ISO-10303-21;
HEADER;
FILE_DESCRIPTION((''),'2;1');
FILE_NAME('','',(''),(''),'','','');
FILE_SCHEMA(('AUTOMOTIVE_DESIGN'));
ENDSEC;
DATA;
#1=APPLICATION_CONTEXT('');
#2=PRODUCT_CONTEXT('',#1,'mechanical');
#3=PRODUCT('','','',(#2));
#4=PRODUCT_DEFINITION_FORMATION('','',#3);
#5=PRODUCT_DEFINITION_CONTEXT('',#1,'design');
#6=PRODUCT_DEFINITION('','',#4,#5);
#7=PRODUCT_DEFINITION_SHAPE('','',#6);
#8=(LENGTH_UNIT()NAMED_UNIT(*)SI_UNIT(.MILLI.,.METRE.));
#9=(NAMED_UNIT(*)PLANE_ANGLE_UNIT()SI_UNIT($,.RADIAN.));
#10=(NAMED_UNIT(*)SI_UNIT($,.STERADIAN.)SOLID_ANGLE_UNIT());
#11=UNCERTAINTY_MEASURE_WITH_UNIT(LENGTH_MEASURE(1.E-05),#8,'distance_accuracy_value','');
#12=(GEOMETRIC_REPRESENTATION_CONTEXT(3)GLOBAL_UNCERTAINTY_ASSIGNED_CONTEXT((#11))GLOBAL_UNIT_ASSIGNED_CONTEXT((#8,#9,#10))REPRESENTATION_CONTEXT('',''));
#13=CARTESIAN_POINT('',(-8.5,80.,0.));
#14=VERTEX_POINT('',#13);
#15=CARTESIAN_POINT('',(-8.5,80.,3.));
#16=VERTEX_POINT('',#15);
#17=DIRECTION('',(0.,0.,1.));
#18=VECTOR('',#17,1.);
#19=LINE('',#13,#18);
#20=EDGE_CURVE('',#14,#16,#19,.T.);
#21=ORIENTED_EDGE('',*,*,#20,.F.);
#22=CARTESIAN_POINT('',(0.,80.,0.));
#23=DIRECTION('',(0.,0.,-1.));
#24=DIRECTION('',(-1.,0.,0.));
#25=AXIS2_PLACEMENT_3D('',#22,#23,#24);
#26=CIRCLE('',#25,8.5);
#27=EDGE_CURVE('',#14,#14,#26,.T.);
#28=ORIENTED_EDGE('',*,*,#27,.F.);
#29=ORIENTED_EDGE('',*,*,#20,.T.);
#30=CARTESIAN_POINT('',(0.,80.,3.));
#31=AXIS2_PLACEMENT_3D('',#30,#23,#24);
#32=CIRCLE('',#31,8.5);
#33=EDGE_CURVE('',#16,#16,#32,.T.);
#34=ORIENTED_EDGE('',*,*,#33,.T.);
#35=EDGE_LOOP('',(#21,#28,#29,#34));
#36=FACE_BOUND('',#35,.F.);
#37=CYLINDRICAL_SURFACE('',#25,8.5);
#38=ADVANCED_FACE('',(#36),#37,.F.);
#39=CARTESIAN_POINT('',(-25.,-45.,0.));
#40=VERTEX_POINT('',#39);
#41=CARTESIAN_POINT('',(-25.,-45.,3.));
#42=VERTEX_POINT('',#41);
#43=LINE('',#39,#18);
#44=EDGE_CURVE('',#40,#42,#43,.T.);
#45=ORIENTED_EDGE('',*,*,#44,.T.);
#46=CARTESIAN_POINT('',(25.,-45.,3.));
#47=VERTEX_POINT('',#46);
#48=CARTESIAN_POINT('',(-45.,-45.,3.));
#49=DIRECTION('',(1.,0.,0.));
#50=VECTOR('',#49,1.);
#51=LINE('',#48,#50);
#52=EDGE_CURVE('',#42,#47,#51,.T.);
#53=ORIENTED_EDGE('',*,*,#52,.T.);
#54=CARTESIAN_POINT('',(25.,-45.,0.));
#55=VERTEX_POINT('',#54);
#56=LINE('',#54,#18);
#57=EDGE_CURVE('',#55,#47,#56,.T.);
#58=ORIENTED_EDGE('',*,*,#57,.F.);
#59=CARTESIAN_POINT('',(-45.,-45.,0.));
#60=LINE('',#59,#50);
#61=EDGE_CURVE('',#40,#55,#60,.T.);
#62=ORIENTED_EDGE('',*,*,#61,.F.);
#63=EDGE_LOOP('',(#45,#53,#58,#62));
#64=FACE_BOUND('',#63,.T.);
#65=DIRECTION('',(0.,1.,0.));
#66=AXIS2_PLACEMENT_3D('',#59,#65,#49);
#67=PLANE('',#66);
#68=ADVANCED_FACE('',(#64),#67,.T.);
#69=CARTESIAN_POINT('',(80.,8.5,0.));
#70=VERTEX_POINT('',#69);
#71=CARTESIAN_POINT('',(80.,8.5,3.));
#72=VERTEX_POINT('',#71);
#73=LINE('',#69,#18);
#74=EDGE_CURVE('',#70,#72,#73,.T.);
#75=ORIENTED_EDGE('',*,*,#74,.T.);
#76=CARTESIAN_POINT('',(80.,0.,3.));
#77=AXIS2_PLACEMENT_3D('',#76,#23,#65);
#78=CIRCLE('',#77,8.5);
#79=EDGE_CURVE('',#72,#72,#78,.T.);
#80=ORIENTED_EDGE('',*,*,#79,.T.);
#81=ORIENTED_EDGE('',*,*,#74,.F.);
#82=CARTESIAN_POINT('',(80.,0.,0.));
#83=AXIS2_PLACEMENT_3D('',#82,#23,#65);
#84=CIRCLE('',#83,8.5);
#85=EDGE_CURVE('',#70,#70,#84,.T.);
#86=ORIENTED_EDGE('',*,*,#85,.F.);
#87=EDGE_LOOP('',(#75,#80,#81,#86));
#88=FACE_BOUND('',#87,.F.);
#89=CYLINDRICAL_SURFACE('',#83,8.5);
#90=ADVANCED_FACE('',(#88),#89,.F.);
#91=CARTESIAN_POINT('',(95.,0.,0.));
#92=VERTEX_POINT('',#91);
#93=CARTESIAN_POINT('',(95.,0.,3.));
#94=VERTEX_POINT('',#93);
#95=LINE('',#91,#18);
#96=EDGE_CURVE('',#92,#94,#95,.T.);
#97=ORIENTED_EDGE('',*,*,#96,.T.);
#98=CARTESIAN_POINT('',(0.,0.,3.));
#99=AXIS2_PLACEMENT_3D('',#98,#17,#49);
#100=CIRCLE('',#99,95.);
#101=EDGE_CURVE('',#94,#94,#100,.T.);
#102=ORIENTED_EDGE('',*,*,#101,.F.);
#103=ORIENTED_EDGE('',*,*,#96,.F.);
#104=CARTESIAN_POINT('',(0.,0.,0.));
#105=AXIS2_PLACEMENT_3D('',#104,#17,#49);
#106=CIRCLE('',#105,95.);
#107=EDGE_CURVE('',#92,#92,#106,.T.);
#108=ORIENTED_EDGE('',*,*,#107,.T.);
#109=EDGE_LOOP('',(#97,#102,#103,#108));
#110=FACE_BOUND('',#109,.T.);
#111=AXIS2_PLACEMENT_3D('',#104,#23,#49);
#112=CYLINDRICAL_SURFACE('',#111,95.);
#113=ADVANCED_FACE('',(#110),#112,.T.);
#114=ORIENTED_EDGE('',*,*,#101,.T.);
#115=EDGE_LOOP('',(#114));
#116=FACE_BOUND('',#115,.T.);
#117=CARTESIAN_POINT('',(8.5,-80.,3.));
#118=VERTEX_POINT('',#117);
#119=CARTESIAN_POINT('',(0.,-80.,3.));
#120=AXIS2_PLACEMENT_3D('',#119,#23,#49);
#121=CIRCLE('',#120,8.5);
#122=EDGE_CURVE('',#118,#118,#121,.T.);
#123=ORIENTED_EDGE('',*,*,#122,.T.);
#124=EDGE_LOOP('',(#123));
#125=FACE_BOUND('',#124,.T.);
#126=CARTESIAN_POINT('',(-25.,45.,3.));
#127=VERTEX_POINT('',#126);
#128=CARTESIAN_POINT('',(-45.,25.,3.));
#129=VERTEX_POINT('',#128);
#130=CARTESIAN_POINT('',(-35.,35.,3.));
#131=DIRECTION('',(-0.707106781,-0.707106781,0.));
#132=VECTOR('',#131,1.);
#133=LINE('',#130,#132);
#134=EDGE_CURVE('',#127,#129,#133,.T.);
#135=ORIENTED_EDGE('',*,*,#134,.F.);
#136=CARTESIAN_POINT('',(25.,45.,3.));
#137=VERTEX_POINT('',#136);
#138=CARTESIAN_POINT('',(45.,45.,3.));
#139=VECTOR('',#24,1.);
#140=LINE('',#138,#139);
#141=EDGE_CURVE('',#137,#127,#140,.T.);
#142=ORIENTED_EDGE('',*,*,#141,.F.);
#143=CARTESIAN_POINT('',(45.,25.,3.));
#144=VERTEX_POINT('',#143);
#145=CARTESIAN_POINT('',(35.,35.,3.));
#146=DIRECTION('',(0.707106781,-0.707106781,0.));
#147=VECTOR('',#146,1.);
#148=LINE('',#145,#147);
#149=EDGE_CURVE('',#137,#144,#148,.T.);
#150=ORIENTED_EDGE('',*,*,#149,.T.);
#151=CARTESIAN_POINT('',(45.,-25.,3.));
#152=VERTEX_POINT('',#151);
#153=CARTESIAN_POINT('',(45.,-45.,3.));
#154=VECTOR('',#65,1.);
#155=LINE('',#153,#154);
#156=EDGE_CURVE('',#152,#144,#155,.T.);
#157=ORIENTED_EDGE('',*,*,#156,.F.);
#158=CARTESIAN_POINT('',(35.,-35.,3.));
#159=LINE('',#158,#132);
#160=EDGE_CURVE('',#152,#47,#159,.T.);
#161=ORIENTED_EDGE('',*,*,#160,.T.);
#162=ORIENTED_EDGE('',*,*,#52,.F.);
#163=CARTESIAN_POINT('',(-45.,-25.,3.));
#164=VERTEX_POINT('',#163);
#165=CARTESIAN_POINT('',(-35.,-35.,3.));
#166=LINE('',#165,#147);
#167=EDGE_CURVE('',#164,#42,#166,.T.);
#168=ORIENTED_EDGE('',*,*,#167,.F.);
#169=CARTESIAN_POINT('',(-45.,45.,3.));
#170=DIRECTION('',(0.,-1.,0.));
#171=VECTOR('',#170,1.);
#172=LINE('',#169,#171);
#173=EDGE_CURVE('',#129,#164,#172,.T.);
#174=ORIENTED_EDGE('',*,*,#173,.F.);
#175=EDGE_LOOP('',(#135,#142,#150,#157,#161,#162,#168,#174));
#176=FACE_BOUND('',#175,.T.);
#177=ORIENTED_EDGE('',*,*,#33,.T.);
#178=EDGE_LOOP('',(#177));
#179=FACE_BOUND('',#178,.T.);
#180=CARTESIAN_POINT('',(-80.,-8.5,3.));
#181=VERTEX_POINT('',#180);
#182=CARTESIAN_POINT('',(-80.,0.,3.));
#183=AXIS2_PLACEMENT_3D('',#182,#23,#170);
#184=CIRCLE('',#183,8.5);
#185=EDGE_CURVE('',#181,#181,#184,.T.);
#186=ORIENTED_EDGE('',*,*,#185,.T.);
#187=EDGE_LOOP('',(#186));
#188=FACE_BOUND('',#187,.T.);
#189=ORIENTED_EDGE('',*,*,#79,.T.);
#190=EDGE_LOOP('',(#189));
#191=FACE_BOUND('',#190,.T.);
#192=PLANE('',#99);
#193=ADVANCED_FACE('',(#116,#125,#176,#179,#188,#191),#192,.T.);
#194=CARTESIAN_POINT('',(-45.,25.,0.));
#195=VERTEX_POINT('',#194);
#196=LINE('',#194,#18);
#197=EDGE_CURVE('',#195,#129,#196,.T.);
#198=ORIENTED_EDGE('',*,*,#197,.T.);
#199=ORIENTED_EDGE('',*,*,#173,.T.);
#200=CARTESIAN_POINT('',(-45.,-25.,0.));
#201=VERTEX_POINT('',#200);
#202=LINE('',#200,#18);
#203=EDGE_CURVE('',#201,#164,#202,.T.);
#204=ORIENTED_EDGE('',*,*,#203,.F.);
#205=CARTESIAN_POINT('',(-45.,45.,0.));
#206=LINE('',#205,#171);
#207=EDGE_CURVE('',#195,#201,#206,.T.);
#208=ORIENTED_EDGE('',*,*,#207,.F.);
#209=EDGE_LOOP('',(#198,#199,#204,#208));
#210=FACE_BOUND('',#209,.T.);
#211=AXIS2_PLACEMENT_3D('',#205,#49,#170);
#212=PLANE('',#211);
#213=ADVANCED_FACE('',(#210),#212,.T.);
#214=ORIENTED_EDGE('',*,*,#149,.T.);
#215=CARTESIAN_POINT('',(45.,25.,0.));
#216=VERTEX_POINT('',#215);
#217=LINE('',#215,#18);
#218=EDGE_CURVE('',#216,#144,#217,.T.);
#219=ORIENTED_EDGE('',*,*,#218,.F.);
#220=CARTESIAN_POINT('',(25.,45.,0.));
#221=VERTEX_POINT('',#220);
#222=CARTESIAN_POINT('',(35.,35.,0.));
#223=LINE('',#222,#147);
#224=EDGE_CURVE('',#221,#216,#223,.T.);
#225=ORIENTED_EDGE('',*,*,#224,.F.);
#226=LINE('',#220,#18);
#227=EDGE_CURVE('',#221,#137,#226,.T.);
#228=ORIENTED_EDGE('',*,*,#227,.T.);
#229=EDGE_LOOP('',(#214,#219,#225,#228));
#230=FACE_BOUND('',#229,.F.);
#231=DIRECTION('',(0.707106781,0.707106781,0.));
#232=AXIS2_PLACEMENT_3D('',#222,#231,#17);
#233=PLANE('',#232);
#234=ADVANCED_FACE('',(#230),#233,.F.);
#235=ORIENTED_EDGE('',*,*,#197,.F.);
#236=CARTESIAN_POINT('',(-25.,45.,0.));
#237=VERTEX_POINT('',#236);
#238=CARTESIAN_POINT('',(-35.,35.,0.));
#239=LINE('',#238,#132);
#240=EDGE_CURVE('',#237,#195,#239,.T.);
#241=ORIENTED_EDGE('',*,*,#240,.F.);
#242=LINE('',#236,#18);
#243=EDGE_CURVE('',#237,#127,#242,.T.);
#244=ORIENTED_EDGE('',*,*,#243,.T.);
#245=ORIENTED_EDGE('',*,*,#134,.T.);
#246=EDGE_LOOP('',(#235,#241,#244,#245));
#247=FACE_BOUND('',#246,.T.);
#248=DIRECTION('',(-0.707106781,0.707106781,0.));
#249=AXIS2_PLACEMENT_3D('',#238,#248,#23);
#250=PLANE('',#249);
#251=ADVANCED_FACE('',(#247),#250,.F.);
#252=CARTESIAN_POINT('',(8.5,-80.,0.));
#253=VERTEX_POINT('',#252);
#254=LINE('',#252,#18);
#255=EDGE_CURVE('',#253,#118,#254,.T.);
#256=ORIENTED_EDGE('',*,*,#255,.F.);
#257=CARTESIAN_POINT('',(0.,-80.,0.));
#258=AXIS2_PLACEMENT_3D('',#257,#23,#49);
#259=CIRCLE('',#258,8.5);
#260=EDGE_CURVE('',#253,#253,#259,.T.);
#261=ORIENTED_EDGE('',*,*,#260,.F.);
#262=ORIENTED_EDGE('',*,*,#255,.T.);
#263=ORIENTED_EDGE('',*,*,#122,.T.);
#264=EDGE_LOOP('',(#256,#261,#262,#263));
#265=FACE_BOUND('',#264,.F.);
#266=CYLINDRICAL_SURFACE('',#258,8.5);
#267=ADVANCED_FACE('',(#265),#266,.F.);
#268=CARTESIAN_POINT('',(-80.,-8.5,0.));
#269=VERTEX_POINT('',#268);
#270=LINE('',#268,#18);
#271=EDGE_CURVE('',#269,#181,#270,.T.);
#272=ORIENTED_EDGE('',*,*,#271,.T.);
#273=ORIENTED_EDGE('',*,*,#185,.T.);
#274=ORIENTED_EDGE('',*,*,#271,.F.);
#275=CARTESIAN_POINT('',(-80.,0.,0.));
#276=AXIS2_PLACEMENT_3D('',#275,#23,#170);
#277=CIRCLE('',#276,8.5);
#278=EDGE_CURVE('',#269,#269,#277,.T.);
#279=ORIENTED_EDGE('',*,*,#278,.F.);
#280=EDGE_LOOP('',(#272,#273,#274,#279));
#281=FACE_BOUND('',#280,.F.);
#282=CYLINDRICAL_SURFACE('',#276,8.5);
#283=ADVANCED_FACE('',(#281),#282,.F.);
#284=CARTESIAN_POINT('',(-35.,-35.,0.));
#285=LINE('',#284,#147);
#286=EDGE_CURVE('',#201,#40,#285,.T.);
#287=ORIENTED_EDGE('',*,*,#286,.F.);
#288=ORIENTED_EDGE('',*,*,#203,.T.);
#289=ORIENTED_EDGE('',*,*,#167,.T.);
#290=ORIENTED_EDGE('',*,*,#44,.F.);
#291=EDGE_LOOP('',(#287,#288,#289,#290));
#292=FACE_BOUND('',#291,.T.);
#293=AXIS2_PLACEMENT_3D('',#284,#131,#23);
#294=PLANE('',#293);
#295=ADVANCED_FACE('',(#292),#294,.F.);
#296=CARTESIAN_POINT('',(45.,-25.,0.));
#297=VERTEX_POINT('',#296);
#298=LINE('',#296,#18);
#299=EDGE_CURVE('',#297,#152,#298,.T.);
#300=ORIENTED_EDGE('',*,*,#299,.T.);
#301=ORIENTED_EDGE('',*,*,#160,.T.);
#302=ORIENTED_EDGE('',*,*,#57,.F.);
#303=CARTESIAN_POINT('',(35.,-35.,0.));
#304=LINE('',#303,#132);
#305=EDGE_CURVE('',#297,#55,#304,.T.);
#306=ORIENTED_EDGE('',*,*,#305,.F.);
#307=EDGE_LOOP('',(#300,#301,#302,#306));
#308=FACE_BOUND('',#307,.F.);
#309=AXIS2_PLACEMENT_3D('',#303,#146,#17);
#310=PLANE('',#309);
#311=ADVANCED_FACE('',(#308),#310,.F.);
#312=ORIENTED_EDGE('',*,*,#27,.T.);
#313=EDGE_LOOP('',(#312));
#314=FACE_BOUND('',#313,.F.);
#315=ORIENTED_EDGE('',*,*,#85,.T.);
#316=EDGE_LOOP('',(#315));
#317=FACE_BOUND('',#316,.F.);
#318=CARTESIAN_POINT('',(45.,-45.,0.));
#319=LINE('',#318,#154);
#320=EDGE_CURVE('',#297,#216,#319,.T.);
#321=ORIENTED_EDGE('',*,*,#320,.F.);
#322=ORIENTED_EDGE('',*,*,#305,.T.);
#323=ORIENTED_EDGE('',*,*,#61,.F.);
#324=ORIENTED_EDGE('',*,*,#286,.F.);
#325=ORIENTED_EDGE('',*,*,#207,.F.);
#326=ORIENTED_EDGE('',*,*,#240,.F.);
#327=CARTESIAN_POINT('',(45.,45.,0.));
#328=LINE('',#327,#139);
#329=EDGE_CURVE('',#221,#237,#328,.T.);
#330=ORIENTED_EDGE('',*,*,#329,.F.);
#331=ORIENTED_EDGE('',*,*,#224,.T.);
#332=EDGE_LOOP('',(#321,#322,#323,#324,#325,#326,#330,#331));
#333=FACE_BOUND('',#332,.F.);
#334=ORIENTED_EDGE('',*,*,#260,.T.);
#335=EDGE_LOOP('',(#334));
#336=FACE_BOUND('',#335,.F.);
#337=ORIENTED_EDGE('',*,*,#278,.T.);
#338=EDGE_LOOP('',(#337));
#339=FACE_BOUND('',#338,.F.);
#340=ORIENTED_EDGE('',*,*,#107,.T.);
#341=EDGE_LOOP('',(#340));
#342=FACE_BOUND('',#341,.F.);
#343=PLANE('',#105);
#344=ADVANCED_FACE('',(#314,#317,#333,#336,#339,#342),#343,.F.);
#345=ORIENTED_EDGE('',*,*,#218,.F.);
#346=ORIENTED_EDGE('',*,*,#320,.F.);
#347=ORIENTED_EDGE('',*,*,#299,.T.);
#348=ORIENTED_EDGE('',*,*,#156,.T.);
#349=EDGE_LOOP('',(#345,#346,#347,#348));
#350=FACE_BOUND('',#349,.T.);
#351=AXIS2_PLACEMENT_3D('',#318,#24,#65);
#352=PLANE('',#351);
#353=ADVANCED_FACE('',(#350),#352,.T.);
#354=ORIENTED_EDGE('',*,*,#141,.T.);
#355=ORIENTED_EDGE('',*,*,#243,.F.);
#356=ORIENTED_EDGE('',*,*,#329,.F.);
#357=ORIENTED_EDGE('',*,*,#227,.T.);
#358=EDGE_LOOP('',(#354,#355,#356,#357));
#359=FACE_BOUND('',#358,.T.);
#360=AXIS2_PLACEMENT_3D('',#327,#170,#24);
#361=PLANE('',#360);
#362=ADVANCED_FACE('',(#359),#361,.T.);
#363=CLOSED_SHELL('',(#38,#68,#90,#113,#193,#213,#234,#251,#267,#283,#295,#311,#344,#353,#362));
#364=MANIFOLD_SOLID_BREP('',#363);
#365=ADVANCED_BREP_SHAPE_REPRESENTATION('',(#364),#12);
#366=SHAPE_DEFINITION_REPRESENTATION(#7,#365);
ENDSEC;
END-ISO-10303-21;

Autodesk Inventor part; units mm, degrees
ref_plane "YZ Plane" through (0, 0, 0) normal (1, 0, 0) x (0, 1, 0)
ref_plane "XZ Plane" through (0, 0, 0) normal (0, 1, 0) x (-1, 0, 0)
ref_plane "XY Plane" through (0, 0, 0) normal (0, 0, 1) x (1, 0, 0)
sketch "Sketch1" plane through (0, 0, 0) normal (0, 0, 1) x (1, 0, 0)
  circle A0 centre (0, 0) radius 95
  line L0 (45, 45) -> (-45, 45)
  line L1 (-45, 45) -> (-45, -45)
  line L2 (-45, -45) -> (45, -45)
  line L3 (45, -45) -> (45, 45)
  line L4 (45, 45) -> (-45, -45) construction
  line L5 (-45, 45) -> (45, -45) construction
  dimension "d157" = 190
  dimension "d158" = 90
  dimension "d159" = 90
extrude "Plate5" add sketch "Sketch1" along normal blind 3
sketch "Sketch7" plane through (0, 0, 0) normal (0, 0, -1) x (-1, 0, 0)
  circle A0 centre (0, 80) radius 8.5
  point P0 (0, 0)
  dimension "d160" = 17
  dimension "d161" = 80
extrude "Cut1" cut sketch "Sketch7" against normal blind 3
pattern_circular "Circular Pattern1" count 4 over 360 about axis through (0, 0, -10) along (0, 0, 1) of "Cut1"
chamfer "Corner Chamfer2" distance 20 angle 45 4 edges at (-45, -45, 1.5) (45, -45, 1.5) (-45, 45, 1.5) (45, 45, 1.5)
properties part number "APN 1454 FDS FLANGE" material "Stainless Steel"
